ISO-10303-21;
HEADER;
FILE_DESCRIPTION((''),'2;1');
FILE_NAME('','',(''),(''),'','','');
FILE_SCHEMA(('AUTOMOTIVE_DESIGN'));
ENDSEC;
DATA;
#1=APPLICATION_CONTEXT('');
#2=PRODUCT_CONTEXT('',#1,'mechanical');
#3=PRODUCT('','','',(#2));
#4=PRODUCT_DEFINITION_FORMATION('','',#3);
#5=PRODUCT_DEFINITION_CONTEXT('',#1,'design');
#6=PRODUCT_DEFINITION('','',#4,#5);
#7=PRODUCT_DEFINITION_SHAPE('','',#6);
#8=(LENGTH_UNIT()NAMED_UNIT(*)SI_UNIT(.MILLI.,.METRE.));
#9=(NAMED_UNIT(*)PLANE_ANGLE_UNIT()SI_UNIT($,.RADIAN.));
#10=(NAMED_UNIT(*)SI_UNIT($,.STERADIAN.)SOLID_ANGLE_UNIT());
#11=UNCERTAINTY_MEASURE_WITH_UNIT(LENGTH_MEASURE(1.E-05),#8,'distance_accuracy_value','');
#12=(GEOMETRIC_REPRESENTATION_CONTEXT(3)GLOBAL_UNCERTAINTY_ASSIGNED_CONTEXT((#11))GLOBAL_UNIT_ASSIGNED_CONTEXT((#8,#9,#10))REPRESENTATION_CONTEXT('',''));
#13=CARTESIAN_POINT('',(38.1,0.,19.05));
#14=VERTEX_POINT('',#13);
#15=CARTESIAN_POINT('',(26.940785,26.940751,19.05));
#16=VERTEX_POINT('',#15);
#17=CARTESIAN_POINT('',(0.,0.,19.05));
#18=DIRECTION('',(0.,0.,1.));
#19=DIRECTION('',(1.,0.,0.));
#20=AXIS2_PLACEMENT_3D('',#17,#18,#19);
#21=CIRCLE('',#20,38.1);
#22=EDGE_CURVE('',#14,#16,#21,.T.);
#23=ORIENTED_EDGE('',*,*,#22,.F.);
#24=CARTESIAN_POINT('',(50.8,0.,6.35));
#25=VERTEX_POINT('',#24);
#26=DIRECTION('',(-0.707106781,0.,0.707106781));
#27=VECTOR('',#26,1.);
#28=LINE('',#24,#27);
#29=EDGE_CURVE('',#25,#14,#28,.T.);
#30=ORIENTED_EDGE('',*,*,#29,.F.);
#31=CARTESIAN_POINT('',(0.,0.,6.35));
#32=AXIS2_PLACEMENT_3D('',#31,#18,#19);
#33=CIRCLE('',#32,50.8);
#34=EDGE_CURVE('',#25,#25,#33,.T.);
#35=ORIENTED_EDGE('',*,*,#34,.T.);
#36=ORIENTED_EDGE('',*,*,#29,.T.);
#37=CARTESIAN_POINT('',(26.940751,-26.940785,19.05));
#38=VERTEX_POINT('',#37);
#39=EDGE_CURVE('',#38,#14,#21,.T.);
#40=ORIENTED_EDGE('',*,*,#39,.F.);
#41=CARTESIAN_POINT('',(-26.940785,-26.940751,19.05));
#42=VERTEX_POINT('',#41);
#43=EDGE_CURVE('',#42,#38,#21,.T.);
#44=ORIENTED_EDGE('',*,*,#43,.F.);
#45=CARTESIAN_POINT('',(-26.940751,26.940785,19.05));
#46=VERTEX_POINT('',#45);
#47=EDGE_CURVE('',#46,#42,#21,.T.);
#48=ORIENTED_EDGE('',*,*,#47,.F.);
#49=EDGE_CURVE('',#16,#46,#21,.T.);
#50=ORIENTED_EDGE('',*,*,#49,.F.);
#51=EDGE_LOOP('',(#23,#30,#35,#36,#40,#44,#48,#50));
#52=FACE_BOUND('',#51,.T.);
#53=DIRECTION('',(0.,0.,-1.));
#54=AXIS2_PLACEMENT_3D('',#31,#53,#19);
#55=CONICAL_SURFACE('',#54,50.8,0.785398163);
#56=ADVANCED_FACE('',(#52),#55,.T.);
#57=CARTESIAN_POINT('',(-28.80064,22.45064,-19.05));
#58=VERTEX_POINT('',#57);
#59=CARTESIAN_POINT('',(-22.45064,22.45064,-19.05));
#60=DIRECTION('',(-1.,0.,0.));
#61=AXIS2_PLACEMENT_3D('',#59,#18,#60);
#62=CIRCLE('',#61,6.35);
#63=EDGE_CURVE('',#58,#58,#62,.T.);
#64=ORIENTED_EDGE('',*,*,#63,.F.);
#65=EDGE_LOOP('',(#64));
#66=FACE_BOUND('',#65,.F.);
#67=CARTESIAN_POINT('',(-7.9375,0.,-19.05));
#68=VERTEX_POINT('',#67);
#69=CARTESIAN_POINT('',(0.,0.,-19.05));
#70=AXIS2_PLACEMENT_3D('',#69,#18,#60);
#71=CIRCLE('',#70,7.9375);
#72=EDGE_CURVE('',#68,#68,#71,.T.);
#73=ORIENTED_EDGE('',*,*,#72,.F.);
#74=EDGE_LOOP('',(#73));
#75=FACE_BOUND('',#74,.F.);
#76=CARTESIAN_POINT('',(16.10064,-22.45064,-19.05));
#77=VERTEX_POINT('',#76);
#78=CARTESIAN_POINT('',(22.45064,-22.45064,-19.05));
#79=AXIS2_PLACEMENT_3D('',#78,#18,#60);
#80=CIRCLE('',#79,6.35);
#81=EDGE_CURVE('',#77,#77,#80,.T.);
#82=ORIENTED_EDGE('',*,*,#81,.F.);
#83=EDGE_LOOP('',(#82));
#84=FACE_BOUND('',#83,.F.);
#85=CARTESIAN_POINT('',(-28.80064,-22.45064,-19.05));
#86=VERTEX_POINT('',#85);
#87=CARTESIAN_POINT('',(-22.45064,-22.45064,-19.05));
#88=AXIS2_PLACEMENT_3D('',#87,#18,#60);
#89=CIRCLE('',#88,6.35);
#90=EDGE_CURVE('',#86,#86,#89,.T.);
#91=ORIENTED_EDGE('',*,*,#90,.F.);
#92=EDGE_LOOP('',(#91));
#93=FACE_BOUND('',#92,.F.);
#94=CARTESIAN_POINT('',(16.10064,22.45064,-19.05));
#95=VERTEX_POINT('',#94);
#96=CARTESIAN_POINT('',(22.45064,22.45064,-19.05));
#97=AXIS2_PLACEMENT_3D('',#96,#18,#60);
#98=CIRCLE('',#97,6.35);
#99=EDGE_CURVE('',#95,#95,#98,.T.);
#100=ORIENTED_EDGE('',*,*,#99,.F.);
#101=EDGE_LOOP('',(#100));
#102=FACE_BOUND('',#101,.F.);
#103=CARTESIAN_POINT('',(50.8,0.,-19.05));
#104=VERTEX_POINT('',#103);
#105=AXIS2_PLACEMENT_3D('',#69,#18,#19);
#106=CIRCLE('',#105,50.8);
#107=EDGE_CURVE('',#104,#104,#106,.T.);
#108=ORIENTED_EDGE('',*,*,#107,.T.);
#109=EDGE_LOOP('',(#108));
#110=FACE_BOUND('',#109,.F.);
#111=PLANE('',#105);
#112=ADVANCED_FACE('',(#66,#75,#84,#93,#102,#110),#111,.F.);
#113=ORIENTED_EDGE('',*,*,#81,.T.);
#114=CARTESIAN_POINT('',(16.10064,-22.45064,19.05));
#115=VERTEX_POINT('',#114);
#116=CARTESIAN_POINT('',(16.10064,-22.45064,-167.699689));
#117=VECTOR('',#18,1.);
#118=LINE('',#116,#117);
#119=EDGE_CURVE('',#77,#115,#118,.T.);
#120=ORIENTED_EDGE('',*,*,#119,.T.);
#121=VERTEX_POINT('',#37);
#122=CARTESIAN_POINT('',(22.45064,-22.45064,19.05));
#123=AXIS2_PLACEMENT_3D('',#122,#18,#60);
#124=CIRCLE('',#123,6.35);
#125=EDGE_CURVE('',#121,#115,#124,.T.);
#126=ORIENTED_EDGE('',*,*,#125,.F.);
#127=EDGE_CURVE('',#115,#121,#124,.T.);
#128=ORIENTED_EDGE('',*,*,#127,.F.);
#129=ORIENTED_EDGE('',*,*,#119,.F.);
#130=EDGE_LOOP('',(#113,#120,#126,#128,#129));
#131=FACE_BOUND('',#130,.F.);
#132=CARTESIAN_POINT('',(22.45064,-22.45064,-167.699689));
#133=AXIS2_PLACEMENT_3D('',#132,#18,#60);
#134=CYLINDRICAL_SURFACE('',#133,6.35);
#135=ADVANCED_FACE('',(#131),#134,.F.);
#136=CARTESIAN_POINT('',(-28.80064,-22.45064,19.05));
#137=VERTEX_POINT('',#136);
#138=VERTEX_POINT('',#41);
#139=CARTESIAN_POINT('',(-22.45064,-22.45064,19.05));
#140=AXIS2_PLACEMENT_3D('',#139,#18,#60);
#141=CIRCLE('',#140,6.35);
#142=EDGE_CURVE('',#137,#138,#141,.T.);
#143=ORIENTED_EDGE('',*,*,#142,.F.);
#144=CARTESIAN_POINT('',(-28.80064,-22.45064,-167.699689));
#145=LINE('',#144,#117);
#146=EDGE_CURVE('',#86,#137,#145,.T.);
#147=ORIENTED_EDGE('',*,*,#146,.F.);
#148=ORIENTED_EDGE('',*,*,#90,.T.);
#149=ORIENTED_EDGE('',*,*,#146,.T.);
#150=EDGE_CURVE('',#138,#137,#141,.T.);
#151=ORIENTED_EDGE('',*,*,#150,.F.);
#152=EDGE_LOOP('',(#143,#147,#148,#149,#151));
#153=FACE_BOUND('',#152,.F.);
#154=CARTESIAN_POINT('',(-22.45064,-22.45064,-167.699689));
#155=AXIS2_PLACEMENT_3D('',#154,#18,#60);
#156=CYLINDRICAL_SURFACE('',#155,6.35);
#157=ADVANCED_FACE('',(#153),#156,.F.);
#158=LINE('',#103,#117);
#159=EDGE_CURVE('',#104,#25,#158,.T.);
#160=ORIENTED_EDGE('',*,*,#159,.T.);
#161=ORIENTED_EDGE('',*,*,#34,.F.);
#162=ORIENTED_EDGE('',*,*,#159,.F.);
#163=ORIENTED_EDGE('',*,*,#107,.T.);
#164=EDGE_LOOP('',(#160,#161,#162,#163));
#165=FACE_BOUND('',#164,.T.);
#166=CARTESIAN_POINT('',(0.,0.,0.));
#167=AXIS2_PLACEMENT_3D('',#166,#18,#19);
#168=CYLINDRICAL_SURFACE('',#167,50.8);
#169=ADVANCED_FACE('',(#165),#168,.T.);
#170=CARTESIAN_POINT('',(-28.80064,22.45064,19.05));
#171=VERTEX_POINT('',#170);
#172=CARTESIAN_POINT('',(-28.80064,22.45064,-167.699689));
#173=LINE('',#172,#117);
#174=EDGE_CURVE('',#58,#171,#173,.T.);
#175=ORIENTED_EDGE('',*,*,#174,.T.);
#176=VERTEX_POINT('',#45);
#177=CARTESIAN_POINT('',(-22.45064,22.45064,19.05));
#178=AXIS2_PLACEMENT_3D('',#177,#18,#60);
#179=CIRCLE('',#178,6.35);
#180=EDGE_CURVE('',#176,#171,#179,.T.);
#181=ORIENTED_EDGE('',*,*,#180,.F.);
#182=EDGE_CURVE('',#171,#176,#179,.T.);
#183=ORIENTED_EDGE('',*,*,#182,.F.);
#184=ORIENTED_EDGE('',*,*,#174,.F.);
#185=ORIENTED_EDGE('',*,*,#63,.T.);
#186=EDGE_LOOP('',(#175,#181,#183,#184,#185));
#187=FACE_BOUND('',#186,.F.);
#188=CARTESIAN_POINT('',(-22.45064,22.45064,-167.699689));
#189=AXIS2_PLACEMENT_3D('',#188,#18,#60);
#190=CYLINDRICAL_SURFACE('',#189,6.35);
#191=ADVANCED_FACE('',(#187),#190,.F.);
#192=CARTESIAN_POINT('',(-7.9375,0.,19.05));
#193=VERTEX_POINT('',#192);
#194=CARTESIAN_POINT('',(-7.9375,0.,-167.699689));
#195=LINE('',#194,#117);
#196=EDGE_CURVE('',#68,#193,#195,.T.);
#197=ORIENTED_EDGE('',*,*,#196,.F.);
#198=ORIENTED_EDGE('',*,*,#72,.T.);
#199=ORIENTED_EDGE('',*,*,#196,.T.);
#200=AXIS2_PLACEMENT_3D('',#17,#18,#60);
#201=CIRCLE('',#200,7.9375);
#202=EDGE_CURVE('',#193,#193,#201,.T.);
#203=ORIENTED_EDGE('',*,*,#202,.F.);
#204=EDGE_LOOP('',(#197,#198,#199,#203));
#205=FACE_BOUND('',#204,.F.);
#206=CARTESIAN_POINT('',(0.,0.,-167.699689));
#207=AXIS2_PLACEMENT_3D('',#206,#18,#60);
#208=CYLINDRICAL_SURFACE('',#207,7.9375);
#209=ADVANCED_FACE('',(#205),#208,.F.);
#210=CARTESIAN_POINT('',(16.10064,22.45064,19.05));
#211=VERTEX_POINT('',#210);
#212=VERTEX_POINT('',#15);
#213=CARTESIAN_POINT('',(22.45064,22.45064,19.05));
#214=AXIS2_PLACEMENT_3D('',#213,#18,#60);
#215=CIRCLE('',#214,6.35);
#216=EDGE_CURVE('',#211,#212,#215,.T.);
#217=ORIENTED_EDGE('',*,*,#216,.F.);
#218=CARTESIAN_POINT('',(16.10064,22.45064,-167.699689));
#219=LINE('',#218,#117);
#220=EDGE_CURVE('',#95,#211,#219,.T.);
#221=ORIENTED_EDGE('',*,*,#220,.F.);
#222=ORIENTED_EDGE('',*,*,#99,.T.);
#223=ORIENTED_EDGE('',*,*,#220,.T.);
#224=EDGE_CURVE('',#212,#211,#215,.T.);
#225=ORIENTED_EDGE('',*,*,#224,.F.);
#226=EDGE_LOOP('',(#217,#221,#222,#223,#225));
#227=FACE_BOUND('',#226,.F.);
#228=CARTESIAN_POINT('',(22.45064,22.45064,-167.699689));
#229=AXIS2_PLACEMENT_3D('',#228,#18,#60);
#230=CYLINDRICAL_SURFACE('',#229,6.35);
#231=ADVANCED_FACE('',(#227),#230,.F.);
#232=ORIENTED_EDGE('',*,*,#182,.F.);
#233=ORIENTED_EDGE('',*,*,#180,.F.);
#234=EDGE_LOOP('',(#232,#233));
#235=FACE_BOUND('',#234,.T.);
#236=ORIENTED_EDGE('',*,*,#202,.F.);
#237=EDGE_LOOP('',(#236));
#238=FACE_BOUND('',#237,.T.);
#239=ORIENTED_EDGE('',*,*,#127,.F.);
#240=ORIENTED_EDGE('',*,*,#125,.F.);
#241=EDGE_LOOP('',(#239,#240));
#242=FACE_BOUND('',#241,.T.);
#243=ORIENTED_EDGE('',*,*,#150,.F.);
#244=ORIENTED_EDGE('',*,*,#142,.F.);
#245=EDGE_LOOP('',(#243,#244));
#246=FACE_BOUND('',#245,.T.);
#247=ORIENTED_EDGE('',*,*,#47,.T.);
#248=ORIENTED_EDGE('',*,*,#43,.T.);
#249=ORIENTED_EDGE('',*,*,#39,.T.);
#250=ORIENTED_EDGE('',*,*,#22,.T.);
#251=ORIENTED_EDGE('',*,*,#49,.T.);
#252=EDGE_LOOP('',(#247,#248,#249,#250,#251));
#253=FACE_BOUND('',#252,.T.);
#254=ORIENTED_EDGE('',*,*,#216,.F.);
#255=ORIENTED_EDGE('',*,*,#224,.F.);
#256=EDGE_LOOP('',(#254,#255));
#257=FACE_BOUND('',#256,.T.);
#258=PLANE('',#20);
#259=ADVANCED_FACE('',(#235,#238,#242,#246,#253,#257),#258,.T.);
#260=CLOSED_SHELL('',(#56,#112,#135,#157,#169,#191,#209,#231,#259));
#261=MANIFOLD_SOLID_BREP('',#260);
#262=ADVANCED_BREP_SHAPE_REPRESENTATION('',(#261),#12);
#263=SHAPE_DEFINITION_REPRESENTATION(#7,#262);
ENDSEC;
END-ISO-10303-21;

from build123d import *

# Parameters (mm, degrees)
F0_R     = 50.8
F1_DEPTH = 19.05
F2_SIZE  = 12.7
F4_D     = 12.7
F5_D     = 15.875


# Not quite as in the source:
# - a length typed as a fraction of an inch, garbled in the dataset ("3 / 203.2 mm" for 3/8 in), is restored


with BuildPart() as f1:
    # F0 (on Top) → F1 (new body, symmetric)
    with BuildSketch(Plane.XY):
        Circle(F0_R)
    extrude(amount=F1_DEPTH, both=True)

    # F2
    f2_edges = [f1.edges().sort_by_distance(p)[0] for p in [
        (-50.8, 0, 19.05),
    ]]
    chamfer(f2_edges, length=F2_SIZE)

    # F4 (through all)
    with Locations(Plane(origin=(0, 0, -19.05), x_dir=(1, 0, 0), z_dir=(0, 0, -1))):
        with Locations((-22.4506403027, 22.4506403027), (-22.4506403027, -22.4506403027), (22.4506403027, -22.4506403027), (22.4506403027, 22.4506403027)):
            Hole(F4_D / 2)

    # F5 (through all)
    with Locations(Plane(origin=(0, 0, -19.05), x_dir=(1, 0, 0), z_dir=(0, 0, -1))):
        with Locations((0, 0)):
            Hole(F5_D / 2)


solid = f1.part
